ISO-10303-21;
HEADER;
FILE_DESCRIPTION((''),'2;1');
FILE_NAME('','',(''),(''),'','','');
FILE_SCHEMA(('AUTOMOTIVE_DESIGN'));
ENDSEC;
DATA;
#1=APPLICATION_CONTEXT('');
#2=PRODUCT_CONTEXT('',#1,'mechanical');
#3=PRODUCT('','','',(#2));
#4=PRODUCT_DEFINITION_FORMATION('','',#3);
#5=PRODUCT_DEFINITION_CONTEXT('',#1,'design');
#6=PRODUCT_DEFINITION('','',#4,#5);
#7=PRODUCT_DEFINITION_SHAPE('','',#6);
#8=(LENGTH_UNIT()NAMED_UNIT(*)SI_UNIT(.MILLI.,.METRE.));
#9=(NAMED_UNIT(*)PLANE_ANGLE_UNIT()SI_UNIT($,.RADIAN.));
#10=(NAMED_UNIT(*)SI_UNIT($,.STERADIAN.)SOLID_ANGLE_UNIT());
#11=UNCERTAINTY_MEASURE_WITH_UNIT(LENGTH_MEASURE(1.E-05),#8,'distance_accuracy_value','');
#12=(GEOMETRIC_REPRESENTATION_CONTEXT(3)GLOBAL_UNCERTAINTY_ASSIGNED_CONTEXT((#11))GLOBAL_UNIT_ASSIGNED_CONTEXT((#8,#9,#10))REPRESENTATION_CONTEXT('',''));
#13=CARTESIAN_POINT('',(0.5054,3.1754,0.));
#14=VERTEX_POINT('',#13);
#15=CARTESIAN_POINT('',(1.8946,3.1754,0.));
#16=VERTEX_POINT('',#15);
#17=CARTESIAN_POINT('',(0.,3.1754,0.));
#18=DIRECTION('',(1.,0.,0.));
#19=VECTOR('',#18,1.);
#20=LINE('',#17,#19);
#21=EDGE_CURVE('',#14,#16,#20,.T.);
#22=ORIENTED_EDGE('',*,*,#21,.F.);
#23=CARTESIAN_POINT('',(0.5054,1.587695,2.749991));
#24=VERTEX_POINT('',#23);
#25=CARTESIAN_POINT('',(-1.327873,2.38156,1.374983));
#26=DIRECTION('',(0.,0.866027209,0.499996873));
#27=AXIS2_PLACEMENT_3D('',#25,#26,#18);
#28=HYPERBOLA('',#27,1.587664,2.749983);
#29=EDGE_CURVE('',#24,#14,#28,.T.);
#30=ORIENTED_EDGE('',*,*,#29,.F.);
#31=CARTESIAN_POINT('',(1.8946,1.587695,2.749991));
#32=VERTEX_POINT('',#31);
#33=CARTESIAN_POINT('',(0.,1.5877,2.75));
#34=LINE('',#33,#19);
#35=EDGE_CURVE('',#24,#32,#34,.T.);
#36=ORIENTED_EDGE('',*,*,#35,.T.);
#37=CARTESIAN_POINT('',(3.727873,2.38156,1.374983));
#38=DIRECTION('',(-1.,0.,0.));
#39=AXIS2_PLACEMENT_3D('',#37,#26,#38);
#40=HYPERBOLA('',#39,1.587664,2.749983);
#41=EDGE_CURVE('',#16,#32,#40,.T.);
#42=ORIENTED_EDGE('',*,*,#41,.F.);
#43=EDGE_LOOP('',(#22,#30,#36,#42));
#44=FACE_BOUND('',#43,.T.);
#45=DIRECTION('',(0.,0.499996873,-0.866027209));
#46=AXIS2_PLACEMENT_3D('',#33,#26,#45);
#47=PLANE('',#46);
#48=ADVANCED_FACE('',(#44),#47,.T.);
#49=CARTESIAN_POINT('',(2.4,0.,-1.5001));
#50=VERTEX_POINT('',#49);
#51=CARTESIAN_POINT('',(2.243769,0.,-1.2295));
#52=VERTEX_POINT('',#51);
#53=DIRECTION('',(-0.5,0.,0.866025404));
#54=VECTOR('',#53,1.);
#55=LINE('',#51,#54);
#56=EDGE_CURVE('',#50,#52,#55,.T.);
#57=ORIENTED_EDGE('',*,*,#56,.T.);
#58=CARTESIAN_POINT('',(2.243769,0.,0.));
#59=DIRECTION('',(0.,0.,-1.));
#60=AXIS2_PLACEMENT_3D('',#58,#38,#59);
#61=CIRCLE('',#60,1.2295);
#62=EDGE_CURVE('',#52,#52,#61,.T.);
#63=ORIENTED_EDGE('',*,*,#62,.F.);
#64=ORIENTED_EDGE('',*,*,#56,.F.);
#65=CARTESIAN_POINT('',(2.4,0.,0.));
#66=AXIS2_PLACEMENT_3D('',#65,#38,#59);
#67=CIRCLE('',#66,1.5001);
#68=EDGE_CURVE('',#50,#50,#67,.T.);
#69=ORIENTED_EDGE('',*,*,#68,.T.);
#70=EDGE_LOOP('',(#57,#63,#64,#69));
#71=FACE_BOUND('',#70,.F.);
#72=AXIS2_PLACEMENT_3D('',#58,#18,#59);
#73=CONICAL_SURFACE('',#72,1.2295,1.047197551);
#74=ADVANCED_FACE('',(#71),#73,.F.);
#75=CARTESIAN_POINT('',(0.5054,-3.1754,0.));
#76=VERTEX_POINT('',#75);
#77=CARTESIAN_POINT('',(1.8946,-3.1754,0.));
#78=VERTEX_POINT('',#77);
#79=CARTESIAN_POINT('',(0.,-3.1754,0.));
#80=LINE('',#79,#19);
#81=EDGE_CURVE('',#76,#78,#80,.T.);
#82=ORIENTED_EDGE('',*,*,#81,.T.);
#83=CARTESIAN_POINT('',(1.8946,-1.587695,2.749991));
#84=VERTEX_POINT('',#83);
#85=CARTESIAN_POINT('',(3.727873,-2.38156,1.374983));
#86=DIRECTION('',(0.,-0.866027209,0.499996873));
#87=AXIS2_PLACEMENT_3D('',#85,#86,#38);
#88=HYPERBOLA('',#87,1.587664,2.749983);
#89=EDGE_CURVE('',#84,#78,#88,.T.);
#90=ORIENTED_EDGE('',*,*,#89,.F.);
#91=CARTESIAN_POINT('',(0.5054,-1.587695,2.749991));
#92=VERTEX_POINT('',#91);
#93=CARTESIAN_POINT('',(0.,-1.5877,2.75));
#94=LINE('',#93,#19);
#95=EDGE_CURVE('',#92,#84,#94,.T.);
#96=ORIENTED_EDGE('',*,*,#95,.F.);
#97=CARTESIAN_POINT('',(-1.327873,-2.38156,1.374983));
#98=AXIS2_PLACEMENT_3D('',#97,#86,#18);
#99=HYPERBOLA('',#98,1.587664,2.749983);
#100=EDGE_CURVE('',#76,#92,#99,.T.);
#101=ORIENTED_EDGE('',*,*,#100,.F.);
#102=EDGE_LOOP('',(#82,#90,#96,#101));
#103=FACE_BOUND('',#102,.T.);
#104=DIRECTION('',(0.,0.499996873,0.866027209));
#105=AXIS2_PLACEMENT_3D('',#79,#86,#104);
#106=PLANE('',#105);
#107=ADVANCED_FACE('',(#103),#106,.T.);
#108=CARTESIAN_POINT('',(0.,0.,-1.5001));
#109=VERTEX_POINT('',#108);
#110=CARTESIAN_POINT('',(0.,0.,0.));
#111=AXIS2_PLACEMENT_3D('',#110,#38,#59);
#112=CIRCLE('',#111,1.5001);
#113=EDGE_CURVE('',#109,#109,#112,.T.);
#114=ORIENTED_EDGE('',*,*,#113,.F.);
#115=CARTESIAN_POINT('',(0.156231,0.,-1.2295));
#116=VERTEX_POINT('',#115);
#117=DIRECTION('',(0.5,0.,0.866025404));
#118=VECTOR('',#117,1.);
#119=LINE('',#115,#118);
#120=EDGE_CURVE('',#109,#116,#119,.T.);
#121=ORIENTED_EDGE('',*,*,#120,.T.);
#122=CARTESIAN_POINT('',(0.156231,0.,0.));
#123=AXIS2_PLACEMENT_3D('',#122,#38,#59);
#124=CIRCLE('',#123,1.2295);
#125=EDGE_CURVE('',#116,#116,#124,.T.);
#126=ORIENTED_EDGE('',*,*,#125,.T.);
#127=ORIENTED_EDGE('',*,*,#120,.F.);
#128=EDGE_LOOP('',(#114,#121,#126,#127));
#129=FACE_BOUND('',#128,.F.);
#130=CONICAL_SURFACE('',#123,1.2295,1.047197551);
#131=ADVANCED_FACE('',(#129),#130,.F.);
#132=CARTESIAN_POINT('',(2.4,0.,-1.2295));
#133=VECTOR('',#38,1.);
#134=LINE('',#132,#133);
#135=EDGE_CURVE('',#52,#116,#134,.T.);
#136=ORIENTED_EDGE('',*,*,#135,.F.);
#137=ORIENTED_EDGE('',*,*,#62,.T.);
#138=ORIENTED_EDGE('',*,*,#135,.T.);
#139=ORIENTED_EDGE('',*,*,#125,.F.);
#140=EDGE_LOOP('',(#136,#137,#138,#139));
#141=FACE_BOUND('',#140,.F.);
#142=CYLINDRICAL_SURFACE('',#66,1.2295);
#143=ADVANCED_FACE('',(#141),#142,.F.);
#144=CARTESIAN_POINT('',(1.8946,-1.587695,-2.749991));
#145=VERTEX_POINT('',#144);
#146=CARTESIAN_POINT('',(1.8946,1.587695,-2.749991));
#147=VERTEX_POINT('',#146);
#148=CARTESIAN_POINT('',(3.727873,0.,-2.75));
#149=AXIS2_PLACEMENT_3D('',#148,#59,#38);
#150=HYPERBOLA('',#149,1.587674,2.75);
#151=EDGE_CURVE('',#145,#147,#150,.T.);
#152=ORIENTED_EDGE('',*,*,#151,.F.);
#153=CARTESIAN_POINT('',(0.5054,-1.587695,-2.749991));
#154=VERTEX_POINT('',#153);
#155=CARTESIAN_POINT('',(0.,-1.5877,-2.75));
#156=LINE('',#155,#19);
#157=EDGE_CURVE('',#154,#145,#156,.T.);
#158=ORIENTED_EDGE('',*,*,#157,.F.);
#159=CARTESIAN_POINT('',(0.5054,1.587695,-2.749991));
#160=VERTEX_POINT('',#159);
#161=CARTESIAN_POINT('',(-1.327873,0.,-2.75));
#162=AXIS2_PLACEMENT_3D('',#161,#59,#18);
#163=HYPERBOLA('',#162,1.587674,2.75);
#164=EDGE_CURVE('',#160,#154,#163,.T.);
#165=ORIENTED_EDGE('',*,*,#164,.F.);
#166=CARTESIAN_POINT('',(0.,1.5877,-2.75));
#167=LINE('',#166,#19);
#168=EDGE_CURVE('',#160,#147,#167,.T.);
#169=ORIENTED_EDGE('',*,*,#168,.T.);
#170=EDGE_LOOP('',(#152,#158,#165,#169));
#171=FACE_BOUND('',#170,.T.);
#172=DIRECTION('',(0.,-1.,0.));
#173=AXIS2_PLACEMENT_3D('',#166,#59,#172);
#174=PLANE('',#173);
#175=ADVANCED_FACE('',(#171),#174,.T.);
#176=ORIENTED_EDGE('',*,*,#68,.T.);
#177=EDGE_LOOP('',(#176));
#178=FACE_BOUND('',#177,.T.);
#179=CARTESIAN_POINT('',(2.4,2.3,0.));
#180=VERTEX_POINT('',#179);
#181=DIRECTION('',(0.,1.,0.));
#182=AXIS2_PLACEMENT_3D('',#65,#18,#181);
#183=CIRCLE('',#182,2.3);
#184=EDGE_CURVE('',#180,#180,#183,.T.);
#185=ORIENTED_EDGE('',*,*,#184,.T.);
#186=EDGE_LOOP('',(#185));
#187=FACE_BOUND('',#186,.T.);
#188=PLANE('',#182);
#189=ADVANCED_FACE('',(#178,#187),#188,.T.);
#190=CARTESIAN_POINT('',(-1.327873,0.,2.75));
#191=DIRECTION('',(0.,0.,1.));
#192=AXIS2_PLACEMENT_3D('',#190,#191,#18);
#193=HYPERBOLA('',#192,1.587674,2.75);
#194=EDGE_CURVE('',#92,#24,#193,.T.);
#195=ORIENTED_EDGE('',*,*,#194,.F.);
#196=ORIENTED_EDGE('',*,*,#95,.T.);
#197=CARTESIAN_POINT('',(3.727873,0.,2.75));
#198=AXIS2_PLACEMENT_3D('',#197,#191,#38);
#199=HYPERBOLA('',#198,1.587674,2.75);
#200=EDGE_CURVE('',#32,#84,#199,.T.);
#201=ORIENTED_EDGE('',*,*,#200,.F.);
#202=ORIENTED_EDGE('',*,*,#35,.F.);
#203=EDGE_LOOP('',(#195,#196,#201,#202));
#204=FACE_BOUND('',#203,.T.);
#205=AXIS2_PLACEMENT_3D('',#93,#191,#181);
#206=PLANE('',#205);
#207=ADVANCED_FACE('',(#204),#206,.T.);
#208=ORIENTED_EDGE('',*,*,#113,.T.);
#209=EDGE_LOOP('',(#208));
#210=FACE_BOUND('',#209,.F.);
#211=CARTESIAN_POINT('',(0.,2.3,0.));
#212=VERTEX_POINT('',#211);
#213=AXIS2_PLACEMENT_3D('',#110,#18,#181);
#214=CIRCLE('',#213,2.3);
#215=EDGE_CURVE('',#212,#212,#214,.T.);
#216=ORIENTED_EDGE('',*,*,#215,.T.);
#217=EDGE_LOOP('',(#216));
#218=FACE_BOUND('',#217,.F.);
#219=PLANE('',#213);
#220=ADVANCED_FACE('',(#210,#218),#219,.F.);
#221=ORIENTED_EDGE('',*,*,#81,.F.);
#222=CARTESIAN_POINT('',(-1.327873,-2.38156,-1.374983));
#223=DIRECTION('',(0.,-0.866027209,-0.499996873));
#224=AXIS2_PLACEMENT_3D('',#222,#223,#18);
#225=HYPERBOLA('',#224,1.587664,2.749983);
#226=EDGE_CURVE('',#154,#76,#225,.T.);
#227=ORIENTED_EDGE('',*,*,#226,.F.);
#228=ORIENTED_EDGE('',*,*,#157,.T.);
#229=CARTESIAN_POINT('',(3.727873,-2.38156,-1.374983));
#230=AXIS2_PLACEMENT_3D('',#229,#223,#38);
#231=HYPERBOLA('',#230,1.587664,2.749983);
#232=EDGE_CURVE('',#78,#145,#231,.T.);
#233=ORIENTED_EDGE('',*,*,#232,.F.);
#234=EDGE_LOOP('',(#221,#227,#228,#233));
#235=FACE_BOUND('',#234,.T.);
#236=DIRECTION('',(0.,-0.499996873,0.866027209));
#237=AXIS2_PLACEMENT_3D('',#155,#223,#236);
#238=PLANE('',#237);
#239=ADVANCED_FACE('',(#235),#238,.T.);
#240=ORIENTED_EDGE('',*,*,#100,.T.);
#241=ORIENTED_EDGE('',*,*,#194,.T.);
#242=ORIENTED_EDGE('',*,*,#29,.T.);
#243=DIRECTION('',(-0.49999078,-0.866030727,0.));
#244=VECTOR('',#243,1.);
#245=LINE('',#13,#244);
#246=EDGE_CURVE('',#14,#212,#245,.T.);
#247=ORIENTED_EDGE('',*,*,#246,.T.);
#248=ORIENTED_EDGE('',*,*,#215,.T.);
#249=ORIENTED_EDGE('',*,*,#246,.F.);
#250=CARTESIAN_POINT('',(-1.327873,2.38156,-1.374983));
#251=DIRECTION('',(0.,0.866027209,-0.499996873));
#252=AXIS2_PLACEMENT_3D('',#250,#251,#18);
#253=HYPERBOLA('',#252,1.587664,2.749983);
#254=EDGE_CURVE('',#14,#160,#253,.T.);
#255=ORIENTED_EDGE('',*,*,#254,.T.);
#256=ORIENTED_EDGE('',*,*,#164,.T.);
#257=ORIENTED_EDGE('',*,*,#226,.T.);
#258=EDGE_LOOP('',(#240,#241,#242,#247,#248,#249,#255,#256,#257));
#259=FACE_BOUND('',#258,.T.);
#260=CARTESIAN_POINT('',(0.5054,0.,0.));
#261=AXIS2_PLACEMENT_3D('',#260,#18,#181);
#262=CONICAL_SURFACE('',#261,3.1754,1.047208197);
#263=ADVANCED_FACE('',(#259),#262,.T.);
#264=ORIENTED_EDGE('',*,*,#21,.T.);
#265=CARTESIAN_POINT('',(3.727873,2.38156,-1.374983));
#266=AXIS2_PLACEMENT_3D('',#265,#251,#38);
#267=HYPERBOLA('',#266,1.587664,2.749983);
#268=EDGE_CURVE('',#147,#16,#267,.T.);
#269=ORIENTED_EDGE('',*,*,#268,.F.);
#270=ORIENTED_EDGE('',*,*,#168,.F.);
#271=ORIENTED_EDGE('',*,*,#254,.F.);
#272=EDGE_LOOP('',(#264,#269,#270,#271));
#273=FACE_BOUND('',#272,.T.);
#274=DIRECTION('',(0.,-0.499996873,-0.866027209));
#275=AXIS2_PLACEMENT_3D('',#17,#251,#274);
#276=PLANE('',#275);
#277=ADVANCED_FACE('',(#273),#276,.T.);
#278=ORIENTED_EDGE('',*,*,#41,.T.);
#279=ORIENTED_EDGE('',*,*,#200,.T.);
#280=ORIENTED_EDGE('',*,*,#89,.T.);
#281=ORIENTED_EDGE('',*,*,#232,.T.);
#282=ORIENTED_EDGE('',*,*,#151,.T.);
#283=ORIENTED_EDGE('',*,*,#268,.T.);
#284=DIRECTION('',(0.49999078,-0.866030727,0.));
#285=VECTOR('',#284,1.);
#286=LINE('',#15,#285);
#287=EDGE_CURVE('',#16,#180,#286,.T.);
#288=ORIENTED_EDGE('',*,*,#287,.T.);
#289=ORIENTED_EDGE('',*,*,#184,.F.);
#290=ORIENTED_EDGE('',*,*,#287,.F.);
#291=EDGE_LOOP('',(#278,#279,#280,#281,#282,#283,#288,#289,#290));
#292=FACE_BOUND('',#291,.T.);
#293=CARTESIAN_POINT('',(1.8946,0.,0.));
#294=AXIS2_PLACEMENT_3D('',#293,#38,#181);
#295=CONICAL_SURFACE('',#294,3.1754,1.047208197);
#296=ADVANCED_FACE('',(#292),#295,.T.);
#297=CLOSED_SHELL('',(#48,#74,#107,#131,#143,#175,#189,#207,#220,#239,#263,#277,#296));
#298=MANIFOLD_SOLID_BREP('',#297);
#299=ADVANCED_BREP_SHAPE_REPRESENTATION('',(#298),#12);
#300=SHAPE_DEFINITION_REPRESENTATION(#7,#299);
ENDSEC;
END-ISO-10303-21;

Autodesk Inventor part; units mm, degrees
ref_plane "YZ Plane" through (0, 0, 0) normal (1, 0, 0) x (0, 1, 0)
ref_plane "XZ Plane" through (0, 0, 0) normal (0, 1, 0) x (-1, 0, 0)
sketch "Esquisse1" plane through (0, 0, 0) normal (1, 0, 0) x (0, 1, 0)
  line L0 (-3.1754, 0) -> (-1.5877, 2.75)
  line L1 (-1.5877, 2.75) -> (1.5877, 2.75)
  line L2 (1.5877, 2.75) -> (3.1754, 0)
  line L3 (3.1754, 0) -> (1.5877, -2.75)
  line L4 (1.5877, -2.75) -> (-1.5877, -2.75)
  line L5 (-1.5877, -2.75) -> (-3.1754, 0)
  point P0 (0, 0)
  point P1 (0, 0)
  dimension "d0" = 6.3509
extrude "Corps" add sketch "Esquisse1" along normal blind 2.4
sketch "Esquisse2" plane through (0, 0, 0) normal (0, 0, 1) x (1, 0, 0)
  line L0 (0, 1.5877) -> (0, 3.1754) projected
  line L1 (0, 3.1754) -> (2.4, 3.1754) projected
  line L2 (2.4, 1.5877) -> (2.4, 3.1754) projected
  line L3 (-0.48, 0) -> (2.88, 0) projected
  line L4 (0.5054, 3.1754) -> (0, 2.3)
  line L5 (1.8946, 3.1754) -> (2.4, 2.3)
  dimension "d3" = 30
  dimension "d4" = 30
  dimension "d5" = 4.6
  dimension "d6" = 4.6
revolve "Chanfrein1" cut sketch "Esquisse2" angle 360 about axis through (-10, 0, 0) along (1, 0, 0)
sketch "Esquisse3" plane through (2.4, 0, 0) normal (1, 0, 0) x (0, 0, -1)
  arc A0 (-0.625, -1.0825) -> (0.625, -1.0825) centre (0, 0) ccw projected
hole "Filetage" at (2.4, 0, 0) direction (-1, 0, 0) diameter 2.459 end through all thread size "M3x0.5" class "6H" standard "ISO Metric profile"
chamfer "Chanfrein2" distance 0.2706 angle 30 1 edges at (2.4, 0, 1.2295) measured on face at (2.4, 1.9179, -0.2329)
chamfer "Chanfrein3" distance 0.2706 angle 30 1 edges at (0, 0, 1.2295) measured on face at (0, 1.9179, -0.2329)
ref_plane "Work Plane1" through (-6.3375, 0, 0) normal (0, -0.8660254, -0.5) x (1, 0, 0)
equation "\"d0\" = 1.1547 * SW"
equation "\"d1\" = KOH"
equation "\"d8\" = -0.5 * GD1 + 0.5 * NND"
equation "\"d40\" = -0.5 * GD1 + 0.5 * NND"
equation "\"d10\" = -0.5 * GD1 + 0.5 * NND"
equation "\"d41\" = -0.5 * GD1 + 0.5 * NND"
equation "\"d3\" = ANG1"
equation "\"d4\" = ANG2"
equation "\"d5\" = SW0"
equation "\"d6\" = SW01"
equation "\"ANG1\" = 30deg"
equation "\"ANG2\" = 30deg"
equation "\"NND\" = 3"
equation "\"KOH\" = 2.4"
equation "\"SW\" = 5.5"
equation "\"SW0\" = 4.6"
equation "\"SW01\" = SW0"
equation "\"GUL\" = 0.541266 * PTC"
equation "\"THREADDIA\" = 3"
equation "\"TOA\" = 30deg"
equation "\"PTC\" = 0.5"
equation "\"E0\" = 1.155 * SW"
equation "\"GAL\" = 0.541266 * PTC"
equation "\"GD1\" = 2.458734"
properties part number "ISO 4032 - M3" material "Acier inoxydable 440C"
